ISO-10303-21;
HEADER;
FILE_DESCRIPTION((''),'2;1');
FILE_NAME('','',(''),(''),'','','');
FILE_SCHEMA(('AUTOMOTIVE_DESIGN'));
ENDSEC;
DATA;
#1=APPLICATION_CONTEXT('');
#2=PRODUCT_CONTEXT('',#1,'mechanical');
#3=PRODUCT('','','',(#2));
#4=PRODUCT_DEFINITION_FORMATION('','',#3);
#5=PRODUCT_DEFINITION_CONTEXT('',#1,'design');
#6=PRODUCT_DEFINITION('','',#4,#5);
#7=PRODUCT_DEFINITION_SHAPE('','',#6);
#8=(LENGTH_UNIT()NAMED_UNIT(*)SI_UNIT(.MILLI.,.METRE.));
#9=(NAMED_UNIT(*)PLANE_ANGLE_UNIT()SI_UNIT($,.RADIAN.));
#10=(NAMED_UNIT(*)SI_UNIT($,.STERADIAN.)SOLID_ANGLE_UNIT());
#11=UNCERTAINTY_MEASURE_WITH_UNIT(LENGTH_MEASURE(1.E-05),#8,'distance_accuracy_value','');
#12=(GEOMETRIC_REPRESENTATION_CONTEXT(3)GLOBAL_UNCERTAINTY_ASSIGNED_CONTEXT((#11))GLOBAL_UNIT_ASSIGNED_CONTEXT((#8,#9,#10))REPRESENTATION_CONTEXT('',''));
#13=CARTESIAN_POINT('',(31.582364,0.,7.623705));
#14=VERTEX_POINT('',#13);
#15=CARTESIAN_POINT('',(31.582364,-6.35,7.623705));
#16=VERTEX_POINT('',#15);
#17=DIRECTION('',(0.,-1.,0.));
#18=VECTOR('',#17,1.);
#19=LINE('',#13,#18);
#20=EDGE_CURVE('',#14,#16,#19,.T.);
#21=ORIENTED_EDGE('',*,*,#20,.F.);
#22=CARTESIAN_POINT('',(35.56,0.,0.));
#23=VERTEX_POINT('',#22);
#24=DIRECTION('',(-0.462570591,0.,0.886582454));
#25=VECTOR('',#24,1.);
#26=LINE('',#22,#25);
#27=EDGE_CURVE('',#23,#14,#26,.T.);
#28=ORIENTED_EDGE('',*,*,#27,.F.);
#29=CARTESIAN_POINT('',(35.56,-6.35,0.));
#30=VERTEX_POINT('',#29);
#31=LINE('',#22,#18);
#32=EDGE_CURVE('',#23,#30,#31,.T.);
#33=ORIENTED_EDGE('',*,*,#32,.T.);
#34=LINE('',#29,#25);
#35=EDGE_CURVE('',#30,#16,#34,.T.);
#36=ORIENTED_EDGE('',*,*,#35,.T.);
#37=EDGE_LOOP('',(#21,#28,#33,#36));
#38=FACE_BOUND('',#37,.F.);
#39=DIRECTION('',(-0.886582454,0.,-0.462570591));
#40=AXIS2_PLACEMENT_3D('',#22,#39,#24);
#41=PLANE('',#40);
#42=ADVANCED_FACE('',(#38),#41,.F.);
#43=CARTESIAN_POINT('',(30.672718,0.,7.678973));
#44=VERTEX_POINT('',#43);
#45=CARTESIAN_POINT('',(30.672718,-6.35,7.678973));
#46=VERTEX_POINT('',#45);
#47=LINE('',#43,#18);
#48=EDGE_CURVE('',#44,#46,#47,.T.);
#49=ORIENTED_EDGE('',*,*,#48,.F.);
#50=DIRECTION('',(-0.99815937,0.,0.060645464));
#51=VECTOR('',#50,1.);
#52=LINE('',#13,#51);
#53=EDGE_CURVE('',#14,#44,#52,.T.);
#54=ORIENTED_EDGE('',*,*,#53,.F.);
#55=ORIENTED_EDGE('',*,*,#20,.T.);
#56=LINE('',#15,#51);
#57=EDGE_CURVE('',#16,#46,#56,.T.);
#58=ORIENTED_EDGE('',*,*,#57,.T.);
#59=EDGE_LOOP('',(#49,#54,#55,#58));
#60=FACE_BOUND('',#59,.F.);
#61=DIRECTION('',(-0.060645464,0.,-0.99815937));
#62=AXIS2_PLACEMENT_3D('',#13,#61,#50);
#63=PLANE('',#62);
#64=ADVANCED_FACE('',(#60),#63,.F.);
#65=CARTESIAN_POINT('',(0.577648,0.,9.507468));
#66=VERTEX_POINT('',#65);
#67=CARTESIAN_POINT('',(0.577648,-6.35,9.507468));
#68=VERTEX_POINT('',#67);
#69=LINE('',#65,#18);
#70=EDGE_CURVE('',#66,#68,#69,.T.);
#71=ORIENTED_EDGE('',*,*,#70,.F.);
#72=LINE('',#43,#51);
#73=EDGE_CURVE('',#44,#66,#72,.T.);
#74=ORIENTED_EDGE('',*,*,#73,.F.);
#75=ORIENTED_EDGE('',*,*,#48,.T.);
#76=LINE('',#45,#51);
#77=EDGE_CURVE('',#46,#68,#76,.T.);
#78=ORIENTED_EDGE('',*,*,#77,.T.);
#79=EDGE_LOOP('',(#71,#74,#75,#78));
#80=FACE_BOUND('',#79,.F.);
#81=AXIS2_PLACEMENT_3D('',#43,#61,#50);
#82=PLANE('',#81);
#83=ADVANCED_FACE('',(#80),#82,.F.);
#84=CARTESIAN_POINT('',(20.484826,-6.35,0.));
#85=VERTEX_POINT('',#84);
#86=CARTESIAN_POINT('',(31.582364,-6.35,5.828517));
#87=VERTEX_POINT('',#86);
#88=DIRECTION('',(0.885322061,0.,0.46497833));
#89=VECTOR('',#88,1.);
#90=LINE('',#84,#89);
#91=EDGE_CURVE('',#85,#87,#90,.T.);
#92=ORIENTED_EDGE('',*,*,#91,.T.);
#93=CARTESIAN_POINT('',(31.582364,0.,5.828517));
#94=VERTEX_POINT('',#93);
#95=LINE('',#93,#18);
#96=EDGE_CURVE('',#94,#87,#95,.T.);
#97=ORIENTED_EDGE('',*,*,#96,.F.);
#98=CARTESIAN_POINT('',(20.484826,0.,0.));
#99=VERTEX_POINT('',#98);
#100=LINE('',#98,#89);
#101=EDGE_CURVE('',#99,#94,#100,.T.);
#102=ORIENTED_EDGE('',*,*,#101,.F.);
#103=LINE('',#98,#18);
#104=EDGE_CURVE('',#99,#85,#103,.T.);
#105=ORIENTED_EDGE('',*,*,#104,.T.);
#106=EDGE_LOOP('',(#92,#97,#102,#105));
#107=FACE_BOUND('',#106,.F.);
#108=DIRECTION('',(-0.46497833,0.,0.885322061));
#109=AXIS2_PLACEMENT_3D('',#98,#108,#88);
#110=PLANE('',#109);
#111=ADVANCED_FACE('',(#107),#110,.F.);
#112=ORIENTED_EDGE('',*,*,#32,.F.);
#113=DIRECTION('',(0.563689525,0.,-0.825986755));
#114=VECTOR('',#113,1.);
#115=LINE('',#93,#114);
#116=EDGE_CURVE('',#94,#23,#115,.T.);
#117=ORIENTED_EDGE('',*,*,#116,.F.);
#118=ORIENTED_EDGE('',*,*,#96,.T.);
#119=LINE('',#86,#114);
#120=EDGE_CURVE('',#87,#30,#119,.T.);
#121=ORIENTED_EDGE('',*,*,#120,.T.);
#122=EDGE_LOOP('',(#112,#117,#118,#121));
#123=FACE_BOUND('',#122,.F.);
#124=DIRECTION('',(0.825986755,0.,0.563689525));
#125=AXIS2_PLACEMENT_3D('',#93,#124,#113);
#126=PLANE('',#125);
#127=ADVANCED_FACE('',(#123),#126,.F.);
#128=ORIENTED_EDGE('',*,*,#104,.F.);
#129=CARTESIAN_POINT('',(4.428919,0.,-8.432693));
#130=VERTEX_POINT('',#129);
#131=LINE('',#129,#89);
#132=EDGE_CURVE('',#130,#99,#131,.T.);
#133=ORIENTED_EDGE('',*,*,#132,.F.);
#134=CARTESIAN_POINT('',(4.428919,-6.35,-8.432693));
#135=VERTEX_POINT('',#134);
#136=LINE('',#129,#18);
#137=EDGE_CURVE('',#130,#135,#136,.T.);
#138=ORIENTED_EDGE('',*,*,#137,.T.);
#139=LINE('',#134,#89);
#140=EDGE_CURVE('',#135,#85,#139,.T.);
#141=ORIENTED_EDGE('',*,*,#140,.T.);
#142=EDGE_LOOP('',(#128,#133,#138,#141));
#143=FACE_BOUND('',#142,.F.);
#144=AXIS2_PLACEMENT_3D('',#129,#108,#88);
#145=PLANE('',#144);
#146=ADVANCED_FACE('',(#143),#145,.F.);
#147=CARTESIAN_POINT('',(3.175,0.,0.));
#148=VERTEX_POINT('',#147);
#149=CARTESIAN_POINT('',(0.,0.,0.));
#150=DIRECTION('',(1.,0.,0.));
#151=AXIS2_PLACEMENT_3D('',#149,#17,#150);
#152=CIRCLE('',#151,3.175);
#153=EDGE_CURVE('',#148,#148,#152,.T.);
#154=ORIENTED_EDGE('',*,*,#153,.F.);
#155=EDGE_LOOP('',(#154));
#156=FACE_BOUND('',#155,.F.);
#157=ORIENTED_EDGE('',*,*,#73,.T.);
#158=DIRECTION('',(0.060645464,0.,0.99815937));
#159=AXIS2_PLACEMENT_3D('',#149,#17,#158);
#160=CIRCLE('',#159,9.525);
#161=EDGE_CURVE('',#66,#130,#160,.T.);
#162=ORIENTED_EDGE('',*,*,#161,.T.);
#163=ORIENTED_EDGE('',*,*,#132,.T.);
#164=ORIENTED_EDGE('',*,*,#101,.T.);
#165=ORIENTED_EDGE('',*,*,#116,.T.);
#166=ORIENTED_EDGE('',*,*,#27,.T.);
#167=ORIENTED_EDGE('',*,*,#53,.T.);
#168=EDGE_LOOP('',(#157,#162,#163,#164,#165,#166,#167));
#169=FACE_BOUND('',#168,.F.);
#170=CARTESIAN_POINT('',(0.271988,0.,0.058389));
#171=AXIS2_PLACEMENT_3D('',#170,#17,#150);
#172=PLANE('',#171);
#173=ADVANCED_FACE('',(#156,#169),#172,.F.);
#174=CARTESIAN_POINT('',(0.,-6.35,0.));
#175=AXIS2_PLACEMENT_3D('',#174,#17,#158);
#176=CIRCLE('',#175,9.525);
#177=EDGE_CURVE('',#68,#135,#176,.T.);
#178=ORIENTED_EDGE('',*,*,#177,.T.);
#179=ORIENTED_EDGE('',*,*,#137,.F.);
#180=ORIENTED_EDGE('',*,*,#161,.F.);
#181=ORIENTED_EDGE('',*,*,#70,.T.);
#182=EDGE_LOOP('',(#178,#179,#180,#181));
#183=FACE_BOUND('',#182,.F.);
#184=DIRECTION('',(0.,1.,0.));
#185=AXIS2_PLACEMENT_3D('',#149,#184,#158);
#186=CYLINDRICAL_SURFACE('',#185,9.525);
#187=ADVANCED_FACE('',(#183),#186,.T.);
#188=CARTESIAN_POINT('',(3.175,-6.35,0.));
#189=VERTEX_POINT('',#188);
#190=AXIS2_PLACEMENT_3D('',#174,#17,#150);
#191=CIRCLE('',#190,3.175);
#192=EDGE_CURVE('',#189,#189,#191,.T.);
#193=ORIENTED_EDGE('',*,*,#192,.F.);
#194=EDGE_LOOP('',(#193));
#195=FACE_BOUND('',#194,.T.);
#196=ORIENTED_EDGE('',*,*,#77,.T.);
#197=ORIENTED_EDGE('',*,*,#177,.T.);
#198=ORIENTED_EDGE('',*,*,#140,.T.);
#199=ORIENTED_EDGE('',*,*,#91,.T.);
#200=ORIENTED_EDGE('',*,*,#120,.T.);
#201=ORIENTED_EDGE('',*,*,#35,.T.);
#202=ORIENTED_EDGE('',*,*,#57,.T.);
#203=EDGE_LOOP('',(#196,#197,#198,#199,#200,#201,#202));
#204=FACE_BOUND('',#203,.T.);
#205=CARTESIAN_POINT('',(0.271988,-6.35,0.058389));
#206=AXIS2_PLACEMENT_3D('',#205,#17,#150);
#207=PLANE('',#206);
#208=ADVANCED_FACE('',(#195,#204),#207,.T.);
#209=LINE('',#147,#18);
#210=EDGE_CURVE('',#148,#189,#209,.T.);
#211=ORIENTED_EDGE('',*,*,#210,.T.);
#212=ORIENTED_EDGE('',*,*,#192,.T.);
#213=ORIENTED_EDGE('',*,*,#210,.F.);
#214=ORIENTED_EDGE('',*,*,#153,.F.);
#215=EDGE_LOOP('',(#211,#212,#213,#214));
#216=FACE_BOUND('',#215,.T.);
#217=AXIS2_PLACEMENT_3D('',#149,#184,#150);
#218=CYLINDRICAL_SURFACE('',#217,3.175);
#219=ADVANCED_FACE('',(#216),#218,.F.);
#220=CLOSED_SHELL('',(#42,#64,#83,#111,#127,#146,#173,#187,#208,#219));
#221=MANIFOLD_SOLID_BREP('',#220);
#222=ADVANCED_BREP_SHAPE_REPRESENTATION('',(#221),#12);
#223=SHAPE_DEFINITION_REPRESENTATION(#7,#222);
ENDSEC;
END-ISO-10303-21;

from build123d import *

# Parameters (mm, degrees)
F0_R     = 3.175
F1_DEPTH = 6.35


# Not quite as in the source:
# - the program builds the solid bodies; features that only make, move or delete a surface that nothing else refers to are left out


with BuildPart() as f1:
    # F0 (on Front) → F1 (new body)
    with BuildSketch(Plane.XZ):
        with BuildLine():
            ThreePointArc((4.4289185951, -8.4326926351), (8.1520265768, -4.9264680747), (9.525, 0))
            ThreePointArc((9.525, 0), (6.936415596, 6.5277686601), (0.5776480463, 9.5074679981))
            ThreePointArc((0.5776480463, 9.5074679981), (-9.3128281564, -1.9992140281), (4.4289185951, -8.4326926351))
        make_face()
        Circle(F0_R, mode=Mode.SUBTRACT)
        with BuildLine():
            ThreePointArc((0.5776480463, 9.5074679981), (6.936415596, 6.5277686601), (9.525, 0))
            ThreePointArc((9.525, 0), (8.1520265768, -4.9264680747), (4.4289185951, -8.4326926351))
            Line((4.4289185951, -8.4326926351), (20.4848255962, 0))
            Line((20.4848255962, 0), (31.5823644939, 5.8285174748))
            Line((31.5823644939, 5.8285174748), (35.56, 0))
            Line((35.56, 0), (31.5823644939, 7.623705267))
            Line((31.5823644939, 7.623705267), (30.6727180917, 7.6789729226))
            Line((30.6727180917, 7.6789729226), (0.5776480463, 9.5074679981))
        make_face()
    extrude(amount=F1_DEPTH)


solid = f1.part
